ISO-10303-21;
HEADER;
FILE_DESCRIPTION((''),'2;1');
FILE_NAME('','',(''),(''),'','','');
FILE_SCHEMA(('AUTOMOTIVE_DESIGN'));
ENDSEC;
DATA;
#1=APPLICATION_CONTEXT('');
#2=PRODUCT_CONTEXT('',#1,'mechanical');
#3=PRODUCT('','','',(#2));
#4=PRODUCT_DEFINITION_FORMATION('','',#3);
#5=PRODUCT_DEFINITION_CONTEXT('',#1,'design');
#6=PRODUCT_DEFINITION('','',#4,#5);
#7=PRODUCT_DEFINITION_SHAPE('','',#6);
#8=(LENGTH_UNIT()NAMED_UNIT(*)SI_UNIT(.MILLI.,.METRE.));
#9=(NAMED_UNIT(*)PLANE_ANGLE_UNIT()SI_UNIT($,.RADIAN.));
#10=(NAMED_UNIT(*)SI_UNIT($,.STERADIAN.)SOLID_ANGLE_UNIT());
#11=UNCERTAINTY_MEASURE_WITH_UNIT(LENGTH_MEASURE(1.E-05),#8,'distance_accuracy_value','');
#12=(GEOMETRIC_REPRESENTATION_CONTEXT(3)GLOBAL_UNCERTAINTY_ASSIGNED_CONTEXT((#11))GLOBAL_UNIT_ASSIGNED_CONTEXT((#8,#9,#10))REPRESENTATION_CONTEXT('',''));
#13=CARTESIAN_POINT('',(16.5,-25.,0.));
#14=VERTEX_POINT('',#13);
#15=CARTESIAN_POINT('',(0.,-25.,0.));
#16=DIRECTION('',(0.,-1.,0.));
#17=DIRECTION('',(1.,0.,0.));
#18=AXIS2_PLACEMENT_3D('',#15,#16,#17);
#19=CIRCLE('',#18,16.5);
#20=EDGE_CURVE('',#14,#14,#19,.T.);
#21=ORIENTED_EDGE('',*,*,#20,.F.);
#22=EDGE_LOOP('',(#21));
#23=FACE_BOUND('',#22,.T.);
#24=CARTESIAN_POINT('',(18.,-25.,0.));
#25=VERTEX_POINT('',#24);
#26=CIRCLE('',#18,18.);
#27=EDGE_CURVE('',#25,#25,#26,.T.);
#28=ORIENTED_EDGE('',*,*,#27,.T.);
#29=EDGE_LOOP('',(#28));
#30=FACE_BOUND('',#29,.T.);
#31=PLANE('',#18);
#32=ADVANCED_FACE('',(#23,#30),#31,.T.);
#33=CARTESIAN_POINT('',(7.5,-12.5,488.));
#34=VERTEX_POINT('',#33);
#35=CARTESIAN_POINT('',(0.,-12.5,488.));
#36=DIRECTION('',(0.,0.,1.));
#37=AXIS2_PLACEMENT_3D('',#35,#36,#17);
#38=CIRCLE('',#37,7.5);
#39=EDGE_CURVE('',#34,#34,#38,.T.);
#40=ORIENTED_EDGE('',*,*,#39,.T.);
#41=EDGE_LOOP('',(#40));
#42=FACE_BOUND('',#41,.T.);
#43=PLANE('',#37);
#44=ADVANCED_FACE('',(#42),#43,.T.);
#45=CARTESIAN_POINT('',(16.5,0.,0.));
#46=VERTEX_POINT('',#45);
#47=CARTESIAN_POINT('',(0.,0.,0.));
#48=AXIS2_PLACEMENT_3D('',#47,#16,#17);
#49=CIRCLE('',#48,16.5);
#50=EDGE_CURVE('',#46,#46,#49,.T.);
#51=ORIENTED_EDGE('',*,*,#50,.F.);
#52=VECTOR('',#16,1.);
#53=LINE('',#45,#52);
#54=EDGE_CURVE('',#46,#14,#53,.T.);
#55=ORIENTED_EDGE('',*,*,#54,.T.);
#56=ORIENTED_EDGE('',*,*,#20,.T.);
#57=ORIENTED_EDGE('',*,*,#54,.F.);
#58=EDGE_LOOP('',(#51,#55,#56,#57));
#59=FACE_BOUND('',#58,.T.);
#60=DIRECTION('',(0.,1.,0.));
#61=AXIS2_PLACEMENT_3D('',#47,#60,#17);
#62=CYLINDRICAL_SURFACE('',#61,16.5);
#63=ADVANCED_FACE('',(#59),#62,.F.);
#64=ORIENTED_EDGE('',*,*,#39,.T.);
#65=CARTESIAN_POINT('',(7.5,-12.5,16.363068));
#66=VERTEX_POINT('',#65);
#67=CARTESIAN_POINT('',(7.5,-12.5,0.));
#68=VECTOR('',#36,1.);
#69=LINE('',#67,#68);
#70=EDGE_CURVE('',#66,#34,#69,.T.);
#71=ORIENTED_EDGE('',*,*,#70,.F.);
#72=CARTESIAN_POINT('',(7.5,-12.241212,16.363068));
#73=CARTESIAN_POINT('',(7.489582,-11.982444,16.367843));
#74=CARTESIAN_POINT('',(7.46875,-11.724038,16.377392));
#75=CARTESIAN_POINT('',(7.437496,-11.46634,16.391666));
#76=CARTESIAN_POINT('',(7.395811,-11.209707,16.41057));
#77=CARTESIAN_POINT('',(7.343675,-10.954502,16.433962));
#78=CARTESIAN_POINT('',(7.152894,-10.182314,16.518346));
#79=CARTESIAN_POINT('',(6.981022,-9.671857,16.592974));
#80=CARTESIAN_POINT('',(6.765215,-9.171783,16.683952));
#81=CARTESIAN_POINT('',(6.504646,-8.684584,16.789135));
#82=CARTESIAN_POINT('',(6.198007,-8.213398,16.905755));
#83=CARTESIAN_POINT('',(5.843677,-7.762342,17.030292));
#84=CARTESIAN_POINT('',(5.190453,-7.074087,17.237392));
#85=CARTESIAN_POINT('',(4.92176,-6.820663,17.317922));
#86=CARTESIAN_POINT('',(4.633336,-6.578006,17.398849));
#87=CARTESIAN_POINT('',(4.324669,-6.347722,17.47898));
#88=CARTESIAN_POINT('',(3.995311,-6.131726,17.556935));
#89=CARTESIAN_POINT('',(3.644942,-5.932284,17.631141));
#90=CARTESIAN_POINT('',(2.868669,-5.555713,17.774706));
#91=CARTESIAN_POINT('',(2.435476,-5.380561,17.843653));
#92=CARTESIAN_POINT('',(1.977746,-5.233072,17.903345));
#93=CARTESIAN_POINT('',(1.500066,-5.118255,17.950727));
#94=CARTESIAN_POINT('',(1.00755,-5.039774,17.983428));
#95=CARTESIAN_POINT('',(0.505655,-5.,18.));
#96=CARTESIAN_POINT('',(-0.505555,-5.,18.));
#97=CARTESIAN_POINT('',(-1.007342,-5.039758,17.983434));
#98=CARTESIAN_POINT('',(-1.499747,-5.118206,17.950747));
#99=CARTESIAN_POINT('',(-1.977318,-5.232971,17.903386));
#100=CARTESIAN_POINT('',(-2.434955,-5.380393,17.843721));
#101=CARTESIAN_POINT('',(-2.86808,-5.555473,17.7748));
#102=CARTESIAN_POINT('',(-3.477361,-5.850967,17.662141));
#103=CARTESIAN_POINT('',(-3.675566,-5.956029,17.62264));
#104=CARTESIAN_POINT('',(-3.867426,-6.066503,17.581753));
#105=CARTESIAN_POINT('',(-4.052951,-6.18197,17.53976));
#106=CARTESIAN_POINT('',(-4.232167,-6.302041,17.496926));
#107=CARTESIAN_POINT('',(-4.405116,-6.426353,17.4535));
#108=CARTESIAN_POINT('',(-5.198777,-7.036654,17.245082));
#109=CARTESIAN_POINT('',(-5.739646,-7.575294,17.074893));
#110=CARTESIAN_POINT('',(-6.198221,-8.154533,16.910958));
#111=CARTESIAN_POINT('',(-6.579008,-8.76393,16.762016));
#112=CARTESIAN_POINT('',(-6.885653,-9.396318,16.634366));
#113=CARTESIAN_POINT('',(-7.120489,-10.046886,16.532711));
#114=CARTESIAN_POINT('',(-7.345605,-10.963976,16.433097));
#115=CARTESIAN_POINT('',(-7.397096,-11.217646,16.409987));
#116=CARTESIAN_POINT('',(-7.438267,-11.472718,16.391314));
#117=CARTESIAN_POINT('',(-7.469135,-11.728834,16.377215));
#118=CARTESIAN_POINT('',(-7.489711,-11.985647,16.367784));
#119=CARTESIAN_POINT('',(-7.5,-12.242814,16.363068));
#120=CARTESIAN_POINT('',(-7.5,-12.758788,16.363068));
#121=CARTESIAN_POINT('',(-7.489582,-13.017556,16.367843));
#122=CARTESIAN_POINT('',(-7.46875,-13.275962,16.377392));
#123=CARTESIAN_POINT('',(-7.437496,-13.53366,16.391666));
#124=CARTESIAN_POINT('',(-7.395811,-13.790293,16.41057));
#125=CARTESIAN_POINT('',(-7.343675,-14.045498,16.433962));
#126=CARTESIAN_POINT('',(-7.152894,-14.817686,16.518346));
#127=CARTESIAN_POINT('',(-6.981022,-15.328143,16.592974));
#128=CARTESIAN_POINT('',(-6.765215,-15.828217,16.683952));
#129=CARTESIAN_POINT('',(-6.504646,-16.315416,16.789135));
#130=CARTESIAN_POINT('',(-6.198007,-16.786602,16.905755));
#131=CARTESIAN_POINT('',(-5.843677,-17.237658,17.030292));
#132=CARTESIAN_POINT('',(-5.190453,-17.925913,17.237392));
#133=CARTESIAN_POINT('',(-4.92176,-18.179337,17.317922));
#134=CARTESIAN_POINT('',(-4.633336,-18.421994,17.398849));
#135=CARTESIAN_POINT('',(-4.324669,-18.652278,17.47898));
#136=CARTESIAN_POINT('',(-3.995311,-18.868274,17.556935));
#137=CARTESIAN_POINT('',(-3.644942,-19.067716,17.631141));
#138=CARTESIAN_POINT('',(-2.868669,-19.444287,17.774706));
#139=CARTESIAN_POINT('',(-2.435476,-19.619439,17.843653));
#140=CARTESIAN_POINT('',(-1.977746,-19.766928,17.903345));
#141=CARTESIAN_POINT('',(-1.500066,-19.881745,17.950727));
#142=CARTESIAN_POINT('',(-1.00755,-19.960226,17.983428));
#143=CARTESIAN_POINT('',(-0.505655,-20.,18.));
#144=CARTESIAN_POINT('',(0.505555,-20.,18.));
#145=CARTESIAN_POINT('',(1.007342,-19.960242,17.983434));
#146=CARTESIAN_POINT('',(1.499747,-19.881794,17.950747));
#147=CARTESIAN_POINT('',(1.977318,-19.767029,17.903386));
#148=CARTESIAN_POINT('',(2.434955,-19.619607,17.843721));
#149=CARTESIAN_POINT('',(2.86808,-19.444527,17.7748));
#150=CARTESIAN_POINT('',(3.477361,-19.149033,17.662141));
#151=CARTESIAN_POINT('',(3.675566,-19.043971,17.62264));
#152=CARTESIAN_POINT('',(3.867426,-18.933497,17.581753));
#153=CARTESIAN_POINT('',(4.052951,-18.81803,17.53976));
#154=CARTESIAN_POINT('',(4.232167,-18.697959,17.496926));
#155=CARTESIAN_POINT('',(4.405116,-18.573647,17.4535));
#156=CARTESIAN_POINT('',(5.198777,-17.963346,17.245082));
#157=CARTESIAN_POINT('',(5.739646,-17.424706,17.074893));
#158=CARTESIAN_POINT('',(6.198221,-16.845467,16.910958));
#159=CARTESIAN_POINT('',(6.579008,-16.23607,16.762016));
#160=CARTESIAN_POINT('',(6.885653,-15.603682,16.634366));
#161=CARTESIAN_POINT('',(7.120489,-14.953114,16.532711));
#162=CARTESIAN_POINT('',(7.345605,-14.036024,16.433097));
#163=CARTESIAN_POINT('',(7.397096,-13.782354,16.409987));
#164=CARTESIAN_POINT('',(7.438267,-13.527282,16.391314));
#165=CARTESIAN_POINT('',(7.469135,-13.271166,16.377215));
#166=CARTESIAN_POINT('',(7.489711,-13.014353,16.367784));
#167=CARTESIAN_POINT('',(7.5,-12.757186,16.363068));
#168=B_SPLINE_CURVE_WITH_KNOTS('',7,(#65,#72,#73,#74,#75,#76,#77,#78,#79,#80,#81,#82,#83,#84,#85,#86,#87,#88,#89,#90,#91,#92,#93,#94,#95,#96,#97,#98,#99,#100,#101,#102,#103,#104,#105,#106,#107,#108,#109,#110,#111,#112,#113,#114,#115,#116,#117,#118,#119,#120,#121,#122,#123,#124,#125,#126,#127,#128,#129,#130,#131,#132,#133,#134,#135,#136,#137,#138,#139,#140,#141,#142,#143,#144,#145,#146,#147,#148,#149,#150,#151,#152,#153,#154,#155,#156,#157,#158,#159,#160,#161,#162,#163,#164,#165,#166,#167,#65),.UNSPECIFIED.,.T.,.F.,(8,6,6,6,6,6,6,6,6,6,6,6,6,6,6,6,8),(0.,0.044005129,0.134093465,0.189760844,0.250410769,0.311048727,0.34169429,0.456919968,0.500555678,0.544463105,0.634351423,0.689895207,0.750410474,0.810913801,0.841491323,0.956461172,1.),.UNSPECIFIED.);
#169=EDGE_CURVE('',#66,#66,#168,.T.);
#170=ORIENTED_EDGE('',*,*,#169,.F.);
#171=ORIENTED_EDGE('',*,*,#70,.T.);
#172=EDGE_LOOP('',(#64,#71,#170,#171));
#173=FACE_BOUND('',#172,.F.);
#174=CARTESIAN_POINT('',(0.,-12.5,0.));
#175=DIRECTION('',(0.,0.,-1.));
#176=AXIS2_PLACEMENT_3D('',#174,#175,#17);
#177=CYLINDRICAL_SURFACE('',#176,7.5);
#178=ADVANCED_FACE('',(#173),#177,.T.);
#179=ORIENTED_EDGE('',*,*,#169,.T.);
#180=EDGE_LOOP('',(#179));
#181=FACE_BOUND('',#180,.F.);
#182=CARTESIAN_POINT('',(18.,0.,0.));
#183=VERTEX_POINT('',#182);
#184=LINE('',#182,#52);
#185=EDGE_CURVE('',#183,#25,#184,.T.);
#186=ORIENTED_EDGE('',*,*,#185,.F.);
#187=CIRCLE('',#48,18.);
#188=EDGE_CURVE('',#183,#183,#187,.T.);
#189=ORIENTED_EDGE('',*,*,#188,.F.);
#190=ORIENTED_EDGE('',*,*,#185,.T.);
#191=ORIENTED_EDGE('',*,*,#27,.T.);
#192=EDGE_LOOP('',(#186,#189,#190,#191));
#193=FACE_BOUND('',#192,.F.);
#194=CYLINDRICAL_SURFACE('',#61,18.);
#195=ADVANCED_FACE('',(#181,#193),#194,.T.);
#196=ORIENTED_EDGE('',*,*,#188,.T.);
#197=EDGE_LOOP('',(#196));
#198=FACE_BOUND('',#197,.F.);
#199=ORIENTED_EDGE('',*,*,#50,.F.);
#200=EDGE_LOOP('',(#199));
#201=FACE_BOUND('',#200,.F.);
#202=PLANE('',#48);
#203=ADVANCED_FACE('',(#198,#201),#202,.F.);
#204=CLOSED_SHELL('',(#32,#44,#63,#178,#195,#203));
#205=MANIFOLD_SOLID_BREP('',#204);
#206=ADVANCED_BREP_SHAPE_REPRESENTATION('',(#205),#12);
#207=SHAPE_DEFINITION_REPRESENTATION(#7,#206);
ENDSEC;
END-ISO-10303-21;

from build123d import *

# Parameters (mm, degrees)
F0_R          = 18
F0_R_2        = 16.5
F1_DEPTH      = 25
F2_R          = 7.5
F3_DEPTH      = 488
F4_END_RADIUS = 16.5
F3_FACE_R     = 7.5
F4_REACH      = 509.2142035356


with BuildPart() as f1:
    # F0 (on Front) → F1 (new body)
    with BuildSketch(Plane.XZ):
        Circle(F0_R)
        Circle(F0_R_2, mode=Mode.SUBTRACT)
    extrude(amount=F1_DEPTH)

    # F2 (on Top) → F3 (join)
    with BuildSketch(Plane.XY):
        with Locations((0, -12.5)):
            Circle(F2_R)
    extrude(amount=F3_DEPTH)

    f4_end = (Plane.ZX.offset(-12.5) * Cylinder(F4_END_RADIUS, 2034.2177557588, mode=Mode.PRIVATE)).faces().sort_by_distance((-16.5, -12.5, 0))[0]
    # F3_face (on face) → F4 (cut, up to the whole of a round face its end follows)
    with BuildSketch(Plane(origin=(0, -12.5, 0), x_dir=(1, 0, 0), z_dir=(0, 0, -1))):
        Circle(F3_FACE_R)
    f4_long = extrude(amount=-F4_REACH, mode=Mode.PRIVATE)
    add(split(f4_long, bisect_by=f4_end, keep=Keep.BOTTOM, mode=Mode.PRIVATE), mode=Mode.SUBTRACT)


solid = f1.part
